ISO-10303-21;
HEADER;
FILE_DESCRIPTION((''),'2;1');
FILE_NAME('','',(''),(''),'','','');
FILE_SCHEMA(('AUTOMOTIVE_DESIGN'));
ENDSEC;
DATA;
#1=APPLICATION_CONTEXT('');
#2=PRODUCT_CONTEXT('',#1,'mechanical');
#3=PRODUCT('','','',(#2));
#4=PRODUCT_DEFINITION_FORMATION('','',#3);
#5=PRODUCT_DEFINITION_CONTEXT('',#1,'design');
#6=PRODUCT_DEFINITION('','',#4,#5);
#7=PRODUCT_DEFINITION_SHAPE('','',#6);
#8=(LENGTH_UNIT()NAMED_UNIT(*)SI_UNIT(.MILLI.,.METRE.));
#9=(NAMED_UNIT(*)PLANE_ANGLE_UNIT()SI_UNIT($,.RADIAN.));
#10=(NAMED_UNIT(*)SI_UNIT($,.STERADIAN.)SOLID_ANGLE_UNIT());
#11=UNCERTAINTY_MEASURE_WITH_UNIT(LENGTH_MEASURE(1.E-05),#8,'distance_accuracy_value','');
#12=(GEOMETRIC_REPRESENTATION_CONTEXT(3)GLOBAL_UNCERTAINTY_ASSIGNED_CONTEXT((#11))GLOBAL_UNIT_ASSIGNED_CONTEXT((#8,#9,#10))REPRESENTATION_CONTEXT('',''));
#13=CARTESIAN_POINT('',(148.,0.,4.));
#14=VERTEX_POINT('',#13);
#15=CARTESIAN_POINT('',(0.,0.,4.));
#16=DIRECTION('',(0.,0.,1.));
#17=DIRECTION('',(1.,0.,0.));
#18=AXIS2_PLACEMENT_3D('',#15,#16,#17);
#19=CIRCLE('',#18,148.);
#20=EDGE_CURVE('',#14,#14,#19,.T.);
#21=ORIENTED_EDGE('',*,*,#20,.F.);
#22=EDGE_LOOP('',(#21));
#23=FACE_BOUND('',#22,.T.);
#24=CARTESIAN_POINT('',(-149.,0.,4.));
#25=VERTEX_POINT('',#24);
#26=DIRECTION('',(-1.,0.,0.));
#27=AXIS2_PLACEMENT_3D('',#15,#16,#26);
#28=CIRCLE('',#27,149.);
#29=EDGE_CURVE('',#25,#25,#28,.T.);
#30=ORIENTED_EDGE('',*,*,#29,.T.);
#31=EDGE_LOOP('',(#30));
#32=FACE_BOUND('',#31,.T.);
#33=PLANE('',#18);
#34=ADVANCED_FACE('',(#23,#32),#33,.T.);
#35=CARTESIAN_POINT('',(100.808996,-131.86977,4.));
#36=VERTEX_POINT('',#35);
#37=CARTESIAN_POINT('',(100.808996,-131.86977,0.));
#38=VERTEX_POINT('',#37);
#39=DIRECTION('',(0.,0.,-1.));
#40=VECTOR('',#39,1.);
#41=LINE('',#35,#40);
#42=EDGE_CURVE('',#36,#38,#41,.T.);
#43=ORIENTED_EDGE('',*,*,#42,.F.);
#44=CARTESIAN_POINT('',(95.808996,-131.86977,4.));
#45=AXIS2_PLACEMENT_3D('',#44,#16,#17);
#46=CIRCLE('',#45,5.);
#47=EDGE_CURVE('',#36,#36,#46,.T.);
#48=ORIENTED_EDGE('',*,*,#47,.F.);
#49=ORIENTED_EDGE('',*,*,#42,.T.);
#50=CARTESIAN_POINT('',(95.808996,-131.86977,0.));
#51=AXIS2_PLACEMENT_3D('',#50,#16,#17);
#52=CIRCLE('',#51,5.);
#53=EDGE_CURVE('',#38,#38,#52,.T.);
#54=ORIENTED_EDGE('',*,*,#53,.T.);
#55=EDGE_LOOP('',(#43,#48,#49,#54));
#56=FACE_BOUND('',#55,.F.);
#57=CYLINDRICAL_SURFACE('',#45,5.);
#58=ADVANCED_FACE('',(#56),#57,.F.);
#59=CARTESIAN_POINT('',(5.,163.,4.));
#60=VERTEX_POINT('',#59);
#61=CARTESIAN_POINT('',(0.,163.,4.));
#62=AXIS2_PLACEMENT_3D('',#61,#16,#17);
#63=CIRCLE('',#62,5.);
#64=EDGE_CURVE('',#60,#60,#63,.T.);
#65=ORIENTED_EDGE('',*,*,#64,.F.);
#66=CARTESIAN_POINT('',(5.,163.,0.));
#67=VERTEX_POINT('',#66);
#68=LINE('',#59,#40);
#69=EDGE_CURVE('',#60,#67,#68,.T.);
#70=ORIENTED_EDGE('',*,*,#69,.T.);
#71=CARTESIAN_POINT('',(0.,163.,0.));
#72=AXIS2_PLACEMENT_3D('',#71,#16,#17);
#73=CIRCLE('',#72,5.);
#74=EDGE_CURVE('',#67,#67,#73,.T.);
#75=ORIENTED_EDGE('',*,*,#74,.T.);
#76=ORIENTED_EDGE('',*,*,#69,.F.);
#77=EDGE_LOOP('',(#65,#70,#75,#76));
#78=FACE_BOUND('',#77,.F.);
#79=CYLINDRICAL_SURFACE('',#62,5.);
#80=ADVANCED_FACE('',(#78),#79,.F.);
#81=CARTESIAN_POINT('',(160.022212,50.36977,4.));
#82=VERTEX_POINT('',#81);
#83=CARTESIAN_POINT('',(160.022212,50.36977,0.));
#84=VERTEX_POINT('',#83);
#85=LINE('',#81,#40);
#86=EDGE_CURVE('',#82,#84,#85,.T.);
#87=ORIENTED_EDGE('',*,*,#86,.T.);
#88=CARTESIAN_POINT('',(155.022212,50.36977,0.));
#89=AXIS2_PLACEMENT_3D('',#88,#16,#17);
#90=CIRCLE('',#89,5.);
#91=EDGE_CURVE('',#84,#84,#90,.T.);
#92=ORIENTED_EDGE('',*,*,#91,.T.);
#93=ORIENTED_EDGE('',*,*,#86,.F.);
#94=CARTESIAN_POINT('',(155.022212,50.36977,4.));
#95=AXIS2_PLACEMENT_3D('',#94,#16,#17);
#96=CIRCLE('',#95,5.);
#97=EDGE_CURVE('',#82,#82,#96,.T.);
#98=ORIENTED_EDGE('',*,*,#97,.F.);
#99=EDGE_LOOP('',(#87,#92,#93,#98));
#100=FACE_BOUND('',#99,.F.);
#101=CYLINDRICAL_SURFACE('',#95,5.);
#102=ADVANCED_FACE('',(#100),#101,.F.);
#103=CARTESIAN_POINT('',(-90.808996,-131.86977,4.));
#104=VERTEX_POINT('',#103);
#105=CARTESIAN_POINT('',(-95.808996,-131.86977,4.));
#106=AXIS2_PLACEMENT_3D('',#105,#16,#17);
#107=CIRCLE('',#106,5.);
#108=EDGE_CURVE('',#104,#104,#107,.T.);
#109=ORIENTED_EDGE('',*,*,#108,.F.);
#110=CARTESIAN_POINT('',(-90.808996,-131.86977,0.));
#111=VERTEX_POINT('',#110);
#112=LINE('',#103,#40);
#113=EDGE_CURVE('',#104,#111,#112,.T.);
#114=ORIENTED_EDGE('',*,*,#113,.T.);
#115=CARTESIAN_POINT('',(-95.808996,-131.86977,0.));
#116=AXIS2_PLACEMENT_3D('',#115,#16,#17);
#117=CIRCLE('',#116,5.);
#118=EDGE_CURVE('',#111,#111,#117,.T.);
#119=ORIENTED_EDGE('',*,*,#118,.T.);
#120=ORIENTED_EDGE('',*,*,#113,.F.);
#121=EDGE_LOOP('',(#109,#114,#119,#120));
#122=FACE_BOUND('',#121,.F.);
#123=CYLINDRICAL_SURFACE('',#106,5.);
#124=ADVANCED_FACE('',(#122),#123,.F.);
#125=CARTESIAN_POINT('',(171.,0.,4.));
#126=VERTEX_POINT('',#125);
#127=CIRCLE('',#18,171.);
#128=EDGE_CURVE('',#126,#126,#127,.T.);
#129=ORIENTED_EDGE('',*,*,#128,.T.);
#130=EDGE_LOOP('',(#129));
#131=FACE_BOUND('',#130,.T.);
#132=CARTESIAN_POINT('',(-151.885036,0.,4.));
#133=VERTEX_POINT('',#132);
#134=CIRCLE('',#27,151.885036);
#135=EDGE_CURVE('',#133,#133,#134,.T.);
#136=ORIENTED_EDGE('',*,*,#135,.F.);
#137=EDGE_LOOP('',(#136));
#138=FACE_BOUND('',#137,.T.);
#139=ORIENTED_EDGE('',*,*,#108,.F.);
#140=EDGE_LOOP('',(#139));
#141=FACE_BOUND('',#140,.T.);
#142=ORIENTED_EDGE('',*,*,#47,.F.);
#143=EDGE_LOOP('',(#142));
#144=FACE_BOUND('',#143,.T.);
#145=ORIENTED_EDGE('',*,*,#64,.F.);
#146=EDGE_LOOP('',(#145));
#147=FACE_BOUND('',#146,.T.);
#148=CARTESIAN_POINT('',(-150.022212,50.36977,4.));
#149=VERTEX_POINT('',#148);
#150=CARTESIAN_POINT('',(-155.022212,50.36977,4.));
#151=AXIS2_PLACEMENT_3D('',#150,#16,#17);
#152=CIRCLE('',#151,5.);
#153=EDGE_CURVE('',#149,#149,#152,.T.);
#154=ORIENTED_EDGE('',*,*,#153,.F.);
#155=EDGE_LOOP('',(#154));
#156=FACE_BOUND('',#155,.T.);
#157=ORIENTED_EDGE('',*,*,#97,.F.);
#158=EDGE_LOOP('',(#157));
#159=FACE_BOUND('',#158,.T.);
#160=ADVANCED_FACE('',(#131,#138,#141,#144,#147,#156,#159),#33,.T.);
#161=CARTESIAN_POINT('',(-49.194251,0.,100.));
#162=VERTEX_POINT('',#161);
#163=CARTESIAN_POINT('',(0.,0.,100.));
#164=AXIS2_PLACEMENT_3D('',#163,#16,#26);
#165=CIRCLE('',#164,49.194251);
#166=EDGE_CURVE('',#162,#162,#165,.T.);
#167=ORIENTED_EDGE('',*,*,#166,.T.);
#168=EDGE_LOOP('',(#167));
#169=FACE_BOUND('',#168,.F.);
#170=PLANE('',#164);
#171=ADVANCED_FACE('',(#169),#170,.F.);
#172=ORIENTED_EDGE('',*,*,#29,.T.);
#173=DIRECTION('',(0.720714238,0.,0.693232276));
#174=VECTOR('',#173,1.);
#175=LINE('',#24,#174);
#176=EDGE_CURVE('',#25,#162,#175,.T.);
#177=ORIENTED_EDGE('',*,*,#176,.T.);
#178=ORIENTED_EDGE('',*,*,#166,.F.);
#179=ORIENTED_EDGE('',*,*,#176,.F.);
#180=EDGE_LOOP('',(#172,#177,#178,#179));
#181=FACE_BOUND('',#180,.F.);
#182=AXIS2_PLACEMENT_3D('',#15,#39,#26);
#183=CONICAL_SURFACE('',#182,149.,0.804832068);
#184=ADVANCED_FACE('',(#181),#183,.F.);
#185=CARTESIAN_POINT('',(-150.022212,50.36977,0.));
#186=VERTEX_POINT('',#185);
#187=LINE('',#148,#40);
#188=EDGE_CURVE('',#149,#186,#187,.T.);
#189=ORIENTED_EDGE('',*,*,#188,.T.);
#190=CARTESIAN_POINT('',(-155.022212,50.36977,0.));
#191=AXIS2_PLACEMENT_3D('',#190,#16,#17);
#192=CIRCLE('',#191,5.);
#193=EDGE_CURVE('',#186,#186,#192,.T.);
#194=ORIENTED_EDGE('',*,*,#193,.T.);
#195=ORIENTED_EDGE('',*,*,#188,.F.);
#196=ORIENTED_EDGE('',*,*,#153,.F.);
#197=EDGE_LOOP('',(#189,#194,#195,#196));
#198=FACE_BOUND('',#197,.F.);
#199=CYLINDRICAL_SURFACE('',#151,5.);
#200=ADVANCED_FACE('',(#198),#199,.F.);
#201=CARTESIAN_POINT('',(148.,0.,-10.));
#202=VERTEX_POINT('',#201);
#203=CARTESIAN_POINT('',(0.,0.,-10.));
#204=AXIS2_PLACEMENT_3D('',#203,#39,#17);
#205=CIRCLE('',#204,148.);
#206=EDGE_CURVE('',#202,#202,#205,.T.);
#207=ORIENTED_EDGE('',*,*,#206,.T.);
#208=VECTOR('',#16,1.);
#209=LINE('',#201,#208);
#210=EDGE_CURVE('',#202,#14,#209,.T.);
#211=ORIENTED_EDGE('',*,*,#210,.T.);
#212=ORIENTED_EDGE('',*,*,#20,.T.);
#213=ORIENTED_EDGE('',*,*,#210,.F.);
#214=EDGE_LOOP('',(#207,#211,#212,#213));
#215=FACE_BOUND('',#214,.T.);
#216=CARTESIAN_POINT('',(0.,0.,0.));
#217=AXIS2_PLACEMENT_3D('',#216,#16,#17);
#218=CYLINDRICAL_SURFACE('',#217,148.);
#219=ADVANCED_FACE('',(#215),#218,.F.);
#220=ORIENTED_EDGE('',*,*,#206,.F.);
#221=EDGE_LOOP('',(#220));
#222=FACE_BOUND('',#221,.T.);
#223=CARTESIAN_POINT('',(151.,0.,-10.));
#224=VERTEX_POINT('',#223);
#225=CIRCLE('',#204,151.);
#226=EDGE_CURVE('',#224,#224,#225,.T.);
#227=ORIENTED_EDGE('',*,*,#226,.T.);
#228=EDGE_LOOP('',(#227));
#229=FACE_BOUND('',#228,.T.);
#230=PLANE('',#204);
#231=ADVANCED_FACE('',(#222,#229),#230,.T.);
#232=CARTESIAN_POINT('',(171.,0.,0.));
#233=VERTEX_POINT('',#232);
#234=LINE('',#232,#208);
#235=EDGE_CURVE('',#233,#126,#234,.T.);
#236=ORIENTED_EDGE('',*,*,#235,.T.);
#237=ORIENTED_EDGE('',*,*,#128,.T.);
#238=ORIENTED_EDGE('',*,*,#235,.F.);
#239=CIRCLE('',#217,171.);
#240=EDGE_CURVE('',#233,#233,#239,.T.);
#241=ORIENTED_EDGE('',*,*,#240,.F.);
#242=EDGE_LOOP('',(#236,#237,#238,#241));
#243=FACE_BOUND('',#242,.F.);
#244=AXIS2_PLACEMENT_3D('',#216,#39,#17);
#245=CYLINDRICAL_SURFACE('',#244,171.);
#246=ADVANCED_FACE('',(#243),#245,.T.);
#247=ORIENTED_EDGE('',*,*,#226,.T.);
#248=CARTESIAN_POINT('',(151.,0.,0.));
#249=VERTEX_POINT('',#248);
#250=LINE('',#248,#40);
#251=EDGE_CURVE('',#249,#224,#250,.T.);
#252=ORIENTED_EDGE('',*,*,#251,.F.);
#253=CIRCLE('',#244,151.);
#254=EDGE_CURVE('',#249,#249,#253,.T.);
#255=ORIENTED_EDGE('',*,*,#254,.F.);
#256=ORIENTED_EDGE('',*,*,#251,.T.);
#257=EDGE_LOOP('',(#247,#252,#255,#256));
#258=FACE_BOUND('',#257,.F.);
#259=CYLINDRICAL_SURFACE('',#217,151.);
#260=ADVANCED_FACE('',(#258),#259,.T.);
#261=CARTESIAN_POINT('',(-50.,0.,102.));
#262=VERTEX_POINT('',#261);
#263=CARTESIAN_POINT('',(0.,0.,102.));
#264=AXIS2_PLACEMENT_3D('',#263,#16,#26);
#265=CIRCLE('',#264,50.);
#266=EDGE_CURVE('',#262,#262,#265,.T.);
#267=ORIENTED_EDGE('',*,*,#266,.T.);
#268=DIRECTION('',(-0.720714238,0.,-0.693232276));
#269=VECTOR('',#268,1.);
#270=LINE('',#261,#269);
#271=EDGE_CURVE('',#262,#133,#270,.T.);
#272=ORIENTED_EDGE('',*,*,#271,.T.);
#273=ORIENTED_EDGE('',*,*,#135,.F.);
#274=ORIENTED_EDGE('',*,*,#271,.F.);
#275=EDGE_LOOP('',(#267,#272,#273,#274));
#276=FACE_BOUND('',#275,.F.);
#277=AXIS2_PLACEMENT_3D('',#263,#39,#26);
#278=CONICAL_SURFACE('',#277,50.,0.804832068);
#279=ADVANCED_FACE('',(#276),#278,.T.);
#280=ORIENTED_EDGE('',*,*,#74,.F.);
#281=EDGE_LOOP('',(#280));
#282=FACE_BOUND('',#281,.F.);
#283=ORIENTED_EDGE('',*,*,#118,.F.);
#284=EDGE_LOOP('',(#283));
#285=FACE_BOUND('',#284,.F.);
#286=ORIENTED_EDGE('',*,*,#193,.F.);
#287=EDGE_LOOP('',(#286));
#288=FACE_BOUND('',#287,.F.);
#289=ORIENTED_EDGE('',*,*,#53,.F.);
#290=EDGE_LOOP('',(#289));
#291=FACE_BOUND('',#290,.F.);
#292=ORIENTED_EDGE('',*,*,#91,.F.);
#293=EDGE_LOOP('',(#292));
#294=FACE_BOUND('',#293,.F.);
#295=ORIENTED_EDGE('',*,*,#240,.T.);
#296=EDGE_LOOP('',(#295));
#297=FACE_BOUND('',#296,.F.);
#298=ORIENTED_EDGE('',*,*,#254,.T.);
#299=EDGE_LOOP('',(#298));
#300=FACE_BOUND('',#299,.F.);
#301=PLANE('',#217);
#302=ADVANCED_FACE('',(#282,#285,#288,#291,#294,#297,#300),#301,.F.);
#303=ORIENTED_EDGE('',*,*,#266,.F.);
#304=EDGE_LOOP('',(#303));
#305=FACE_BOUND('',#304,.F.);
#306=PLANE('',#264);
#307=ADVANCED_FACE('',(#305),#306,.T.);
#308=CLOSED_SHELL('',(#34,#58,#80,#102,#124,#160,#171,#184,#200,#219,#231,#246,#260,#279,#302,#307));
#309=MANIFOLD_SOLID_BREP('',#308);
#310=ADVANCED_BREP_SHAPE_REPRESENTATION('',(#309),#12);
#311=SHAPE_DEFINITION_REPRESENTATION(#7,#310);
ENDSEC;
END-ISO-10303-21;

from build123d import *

# Parameters (mm, degrees)
F0_R     = 171
F0_R_2   = 148
F1_DEPTH = 4
F2_R     = 5
F3_DEPTH = 4.001
F4_R     = 151
F4_R_2   = 148
F5_DEPTH = 10


with BuildPart() as f1:
    # F0 (on Top) → F1 (new body)
    with BuildSketch(Plane.XY):
        Circle(F0_R)
        Circle(F0_R_2, mode=Mode.SUBTRACT)
    extrude(amount=F1_DEPTH)

    # F2 (on face) → F3 (cut, through all)
    with BuildSketch(Plane.XY.offset(4)):
        with Locations((0, 163)):
            Circle(F2_R)
        with Locations((-155.0222121561, 50.3697700831)):
            Circle(F2_R)
        with Locations((155.0222121561, 50.3697700831)):
            Circle(F2_R)
        with Locations((95.8089961237, -131.8697700831)):
            Circle(F2_R)
        with Locations((-95.8089961237, -131.8697700831)):
            Circle(F2_R)
    extrude(amount=-F3_DEPTH, mode=Mode.SUBTRACT)

    # F4 (on face) → F5 (join)
    with BuildSketch(Plane(origin=(0, 0, 0), x_dir=(1, 0, 0), z_dir=(0, 0, -1))):
        Circle(F4_R)
        Circle(F4_R_2, mode=Mode.SUBTRACT)
    extrude(amount=F5_DEPTH)

    # F7 (on offset) → F8 (revolve)
    with BuildSketch(Plane.XZ):
        Polygon((-50, 102), (-151.8850358972, 4), (-149, 4), (-49.1942505497, 100), (0, 100), (0, 102), align=None)
    revolve(axis=Axis((0, 0, 51), (0, 0, 1)))


solid = f1.part
